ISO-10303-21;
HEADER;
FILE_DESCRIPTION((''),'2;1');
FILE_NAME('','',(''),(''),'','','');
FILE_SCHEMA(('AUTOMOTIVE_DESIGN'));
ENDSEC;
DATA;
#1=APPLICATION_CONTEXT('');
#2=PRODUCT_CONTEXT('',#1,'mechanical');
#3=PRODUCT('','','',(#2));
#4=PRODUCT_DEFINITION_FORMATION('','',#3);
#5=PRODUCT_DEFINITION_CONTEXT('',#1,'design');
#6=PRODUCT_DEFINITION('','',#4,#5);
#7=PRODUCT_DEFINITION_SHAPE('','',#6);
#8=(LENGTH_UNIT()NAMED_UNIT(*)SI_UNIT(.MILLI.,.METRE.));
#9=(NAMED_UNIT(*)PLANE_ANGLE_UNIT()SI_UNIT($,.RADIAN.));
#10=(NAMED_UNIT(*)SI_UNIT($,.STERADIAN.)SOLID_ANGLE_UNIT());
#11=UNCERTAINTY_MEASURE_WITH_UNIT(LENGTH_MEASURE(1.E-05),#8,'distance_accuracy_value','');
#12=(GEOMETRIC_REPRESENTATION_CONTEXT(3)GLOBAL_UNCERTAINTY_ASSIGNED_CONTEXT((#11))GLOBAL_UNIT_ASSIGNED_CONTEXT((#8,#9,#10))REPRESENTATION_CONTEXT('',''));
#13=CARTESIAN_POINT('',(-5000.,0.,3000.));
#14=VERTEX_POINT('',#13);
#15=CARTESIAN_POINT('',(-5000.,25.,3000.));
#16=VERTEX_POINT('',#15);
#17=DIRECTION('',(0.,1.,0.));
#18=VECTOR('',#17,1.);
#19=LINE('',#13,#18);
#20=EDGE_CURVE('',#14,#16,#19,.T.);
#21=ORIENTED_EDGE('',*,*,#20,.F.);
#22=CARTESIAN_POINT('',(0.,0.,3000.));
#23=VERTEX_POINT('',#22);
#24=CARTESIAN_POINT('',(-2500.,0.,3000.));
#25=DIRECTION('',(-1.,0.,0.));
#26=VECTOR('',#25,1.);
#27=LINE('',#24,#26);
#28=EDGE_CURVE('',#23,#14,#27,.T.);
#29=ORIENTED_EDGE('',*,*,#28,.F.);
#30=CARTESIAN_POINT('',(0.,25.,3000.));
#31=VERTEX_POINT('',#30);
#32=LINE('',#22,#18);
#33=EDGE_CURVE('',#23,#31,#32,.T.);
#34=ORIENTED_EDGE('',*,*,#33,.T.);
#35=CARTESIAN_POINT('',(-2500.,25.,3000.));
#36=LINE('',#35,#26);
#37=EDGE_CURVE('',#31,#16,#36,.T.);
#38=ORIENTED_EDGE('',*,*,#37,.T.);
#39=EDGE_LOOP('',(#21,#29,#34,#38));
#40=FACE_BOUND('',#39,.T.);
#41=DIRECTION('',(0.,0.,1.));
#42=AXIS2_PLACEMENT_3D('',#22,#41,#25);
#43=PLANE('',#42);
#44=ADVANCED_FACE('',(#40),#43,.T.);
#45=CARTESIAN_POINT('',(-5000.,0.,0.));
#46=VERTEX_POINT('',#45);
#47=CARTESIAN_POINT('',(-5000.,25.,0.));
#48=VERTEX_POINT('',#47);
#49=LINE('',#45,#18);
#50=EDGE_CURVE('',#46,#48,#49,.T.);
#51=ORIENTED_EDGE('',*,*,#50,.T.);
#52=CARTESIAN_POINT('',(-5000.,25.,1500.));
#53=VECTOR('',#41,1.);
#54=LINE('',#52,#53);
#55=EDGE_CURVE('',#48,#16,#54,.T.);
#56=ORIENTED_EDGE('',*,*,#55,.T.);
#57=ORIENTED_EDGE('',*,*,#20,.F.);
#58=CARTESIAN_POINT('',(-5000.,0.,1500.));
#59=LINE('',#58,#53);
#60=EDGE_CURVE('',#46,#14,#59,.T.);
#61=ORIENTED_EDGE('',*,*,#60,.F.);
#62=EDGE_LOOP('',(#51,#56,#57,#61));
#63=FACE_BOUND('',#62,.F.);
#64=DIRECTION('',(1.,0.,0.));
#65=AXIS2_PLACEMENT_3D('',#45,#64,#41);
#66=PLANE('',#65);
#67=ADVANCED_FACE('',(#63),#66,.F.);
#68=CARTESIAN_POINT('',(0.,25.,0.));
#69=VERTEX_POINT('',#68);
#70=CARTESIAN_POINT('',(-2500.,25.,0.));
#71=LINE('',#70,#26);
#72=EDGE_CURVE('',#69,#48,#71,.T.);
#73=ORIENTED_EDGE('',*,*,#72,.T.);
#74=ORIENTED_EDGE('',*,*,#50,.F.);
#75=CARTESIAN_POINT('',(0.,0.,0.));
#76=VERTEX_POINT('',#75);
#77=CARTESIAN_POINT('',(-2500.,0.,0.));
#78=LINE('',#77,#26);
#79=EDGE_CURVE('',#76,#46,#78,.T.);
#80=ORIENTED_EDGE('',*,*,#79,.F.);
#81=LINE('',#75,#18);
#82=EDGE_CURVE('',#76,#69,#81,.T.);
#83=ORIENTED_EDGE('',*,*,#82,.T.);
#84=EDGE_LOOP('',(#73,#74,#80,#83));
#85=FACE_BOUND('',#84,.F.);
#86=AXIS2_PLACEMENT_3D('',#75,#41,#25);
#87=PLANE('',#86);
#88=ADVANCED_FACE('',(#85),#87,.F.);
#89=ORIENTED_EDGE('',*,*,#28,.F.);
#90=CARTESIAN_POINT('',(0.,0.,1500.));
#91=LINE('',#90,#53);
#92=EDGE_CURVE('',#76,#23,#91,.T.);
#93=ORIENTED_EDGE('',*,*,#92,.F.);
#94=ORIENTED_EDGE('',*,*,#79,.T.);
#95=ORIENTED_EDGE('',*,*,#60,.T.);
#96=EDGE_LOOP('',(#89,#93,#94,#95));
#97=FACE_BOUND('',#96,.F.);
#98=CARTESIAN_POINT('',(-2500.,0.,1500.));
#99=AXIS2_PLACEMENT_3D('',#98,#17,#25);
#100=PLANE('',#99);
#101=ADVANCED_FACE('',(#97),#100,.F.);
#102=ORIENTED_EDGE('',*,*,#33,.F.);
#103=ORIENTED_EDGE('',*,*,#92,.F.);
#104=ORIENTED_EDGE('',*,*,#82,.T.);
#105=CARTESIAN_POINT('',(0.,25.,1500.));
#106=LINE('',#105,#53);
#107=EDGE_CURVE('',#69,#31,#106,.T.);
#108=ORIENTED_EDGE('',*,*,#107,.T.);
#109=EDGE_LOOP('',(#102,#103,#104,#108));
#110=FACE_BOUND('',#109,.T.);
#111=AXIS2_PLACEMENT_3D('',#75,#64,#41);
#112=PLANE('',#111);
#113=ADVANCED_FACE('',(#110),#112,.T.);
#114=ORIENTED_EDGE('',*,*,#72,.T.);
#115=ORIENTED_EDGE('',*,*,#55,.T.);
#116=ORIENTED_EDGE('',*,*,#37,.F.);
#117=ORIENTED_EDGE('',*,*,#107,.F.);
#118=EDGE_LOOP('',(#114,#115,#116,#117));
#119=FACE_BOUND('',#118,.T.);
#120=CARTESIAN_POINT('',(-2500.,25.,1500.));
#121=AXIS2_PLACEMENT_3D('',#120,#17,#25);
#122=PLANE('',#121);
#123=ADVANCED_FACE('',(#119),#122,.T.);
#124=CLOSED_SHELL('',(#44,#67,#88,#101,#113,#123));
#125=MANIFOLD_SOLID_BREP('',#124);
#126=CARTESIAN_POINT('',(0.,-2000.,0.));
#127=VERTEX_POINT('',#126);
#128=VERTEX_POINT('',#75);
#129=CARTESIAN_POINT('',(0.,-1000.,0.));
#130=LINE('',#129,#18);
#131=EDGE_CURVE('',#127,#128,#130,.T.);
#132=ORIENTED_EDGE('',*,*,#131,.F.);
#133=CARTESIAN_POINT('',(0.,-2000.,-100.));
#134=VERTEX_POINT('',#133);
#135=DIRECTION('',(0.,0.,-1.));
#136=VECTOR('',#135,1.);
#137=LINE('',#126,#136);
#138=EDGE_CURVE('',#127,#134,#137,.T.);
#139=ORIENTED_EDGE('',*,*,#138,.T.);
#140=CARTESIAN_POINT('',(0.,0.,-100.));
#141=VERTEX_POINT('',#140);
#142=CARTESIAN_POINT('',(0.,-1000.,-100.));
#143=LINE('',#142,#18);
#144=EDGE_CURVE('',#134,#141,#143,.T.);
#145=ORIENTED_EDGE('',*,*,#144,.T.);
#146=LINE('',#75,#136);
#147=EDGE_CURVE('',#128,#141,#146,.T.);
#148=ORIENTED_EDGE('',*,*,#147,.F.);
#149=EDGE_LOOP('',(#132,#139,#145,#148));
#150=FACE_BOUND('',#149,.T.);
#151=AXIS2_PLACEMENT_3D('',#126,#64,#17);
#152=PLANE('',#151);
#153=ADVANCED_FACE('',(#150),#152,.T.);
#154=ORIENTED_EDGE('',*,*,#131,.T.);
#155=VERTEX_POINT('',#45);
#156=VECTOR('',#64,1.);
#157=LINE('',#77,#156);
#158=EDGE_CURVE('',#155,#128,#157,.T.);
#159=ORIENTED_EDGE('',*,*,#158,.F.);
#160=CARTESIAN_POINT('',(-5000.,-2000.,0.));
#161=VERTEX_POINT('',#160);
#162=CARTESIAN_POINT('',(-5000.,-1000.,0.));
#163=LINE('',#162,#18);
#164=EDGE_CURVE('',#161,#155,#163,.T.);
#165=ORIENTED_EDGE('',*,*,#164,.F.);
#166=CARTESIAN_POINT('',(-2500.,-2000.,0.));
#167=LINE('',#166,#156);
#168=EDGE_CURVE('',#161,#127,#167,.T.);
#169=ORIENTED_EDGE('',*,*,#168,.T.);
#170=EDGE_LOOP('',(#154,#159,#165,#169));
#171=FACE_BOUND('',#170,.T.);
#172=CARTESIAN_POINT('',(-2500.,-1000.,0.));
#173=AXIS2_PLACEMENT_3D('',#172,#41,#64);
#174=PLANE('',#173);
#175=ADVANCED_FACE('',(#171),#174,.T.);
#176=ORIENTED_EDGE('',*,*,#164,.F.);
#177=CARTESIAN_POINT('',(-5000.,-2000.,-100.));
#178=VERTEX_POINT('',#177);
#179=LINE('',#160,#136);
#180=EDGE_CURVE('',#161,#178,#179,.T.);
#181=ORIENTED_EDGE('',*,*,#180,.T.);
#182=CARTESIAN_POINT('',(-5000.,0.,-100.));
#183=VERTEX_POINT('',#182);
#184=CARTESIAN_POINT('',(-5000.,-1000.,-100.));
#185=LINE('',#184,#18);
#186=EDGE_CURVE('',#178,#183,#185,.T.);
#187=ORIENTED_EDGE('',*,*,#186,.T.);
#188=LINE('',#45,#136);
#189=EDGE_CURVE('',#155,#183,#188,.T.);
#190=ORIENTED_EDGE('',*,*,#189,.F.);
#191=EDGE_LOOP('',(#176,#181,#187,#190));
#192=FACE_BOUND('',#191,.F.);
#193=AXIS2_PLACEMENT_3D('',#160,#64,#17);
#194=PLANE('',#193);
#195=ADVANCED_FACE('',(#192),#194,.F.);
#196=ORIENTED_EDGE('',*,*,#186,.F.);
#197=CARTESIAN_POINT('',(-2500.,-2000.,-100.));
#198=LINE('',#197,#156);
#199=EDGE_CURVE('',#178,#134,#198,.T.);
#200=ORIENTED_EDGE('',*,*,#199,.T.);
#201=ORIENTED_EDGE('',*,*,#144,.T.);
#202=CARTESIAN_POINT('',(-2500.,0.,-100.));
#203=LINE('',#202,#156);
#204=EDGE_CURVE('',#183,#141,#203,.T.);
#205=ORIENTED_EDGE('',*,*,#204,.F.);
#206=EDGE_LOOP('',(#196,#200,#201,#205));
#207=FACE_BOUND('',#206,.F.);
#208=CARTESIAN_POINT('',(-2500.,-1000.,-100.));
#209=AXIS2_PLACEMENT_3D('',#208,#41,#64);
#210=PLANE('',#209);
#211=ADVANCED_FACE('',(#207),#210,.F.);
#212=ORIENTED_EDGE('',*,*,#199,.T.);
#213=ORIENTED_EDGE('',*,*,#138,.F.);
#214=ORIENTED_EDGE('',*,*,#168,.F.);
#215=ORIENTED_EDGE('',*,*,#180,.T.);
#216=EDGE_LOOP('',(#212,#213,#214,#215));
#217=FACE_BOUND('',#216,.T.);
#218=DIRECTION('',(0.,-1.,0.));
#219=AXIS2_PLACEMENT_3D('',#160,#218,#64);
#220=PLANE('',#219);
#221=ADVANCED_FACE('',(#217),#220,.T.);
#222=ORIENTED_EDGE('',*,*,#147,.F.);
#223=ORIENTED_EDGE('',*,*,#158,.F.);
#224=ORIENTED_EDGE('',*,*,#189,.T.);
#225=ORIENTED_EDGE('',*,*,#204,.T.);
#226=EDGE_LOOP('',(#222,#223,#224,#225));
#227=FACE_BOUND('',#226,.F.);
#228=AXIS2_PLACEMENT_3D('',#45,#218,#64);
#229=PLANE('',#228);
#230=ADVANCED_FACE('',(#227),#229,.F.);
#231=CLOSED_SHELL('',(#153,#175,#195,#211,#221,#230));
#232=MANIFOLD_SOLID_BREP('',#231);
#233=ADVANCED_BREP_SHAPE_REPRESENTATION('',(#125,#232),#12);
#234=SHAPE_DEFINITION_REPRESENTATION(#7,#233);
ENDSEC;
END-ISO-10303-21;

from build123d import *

# Parameters (mm, degrees)
F0_W     = 5000
F0_H     = 2000
F1_DEPTH = 100
F2_W     = 5000
F2_H     = 3000
F3_DEPTH = 25


# Not quite as in the source:
# - the program builds the solid bodies; features that only make, move or delete a surface that nothing else refers to are left out


with BuildPart() as f1:
    # F0 (on Top) → F1 (new body)
    with BuildSketch(Plane.XY):
        with Locations((-2500, -1000)):
            Rectangle(F0_W, F0_H)
    extrude(amount=-F1_DEPTH)


with BuildPart() as f3:
    # F2 (on face) → F3 (new body)
    with BuildSketch(Plane(origin=(0, 0, 0), x_dir=(-1, 0, 0), z_dir=(0, 1, 0))):
        with Locations((2500, 1500)):
            Rectangle(F2_W, F2_H)
    extrude(amount=F3_DEPTH)


solid = Compound([f1.part, f3.part])
